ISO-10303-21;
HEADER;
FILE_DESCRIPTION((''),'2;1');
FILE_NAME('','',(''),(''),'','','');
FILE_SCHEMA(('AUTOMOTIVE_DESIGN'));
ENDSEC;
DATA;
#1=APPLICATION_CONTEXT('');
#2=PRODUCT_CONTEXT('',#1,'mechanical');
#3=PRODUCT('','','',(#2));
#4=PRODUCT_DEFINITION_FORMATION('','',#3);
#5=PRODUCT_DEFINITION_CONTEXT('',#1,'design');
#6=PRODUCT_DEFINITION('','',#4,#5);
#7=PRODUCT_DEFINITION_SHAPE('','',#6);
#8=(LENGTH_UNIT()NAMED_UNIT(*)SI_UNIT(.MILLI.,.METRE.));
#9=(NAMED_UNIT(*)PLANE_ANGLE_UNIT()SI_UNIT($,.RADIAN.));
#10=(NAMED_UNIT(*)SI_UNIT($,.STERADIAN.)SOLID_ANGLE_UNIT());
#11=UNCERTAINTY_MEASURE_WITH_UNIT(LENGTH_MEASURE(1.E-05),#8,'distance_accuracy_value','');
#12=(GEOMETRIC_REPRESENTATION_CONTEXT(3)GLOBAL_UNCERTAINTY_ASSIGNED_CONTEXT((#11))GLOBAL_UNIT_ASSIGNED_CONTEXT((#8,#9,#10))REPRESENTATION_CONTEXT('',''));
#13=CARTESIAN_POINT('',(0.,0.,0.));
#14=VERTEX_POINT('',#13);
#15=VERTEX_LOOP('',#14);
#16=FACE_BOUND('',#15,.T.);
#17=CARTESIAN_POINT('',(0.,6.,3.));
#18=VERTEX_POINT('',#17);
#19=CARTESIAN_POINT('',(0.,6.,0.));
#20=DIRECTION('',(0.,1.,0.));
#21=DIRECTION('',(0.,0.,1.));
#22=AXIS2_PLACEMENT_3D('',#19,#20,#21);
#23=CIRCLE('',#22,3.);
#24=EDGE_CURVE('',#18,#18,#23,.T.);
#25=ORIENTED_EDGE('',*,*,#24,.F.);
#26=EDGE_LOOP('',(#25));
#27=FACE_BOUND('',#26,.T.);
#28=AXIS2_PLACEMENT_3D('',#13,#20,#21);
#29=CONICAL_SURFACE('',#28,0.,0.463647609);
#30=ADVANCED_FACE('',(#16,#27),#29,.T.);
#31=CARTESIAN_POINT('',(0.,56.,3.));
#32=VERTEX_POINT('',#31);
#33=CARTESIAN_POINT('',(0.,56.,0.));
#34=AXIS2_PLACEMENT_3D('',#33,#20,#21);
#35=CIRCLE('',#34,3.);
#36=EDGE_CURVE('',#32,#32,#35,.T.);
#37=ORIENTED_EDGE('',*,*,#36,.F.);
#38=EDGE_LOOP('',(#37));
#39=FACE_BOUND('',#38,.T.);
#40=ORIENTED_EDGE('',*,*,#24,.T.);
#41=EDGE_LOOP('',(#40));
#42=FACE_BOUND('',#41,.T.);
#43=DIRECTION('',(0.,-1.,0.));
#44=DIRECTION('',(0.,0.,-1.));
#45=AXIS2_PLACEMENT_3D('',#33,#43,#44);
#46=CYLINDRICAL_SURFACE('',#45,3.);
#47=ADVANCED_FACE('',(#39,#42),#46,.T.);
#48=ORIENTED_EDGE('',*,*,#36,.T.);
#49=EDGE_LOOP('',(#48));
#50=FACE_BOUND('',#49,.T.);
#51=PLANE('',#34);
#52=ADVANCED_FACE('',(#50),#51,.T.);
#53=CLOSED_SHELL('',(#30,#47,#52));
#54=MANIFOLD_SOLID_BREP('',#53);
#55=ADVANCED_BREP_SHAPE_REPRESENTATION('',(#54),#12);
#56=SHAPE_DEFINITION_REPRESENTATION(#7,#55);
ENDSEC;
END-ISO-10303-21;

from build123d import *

# Parameters (mm, degrees)
SKETCH_1_R      = 3
EXTRUDE_1_DEPTH = 50


# Read off the part's stored shape, not the designer's step: 放样1
with BuildPart() as part:
    # 草图1 → 凸台-拉伸1 (new body)
    with BuildSketch(Plane(origin=(0, 6, 0), x_dir=(1, 0, 0), z_dir=(0, 1, 0))):
        with Locations(Location((0, 0, 0), (0, 0, 270))):
            Circle(SKETCH_1_R)
    extrude(amount=EXTRUDE_1_DEPTH)

    # 放样1 outline → 放样1 (revolve)
    with BuildSketch(Plane.XY):
        Polygon((0, 6), (0, 0), (3, 6), align=None)
    revolve(axis=Axis((0, 0, 0), (0, 1, 0)))


solid = part.part
